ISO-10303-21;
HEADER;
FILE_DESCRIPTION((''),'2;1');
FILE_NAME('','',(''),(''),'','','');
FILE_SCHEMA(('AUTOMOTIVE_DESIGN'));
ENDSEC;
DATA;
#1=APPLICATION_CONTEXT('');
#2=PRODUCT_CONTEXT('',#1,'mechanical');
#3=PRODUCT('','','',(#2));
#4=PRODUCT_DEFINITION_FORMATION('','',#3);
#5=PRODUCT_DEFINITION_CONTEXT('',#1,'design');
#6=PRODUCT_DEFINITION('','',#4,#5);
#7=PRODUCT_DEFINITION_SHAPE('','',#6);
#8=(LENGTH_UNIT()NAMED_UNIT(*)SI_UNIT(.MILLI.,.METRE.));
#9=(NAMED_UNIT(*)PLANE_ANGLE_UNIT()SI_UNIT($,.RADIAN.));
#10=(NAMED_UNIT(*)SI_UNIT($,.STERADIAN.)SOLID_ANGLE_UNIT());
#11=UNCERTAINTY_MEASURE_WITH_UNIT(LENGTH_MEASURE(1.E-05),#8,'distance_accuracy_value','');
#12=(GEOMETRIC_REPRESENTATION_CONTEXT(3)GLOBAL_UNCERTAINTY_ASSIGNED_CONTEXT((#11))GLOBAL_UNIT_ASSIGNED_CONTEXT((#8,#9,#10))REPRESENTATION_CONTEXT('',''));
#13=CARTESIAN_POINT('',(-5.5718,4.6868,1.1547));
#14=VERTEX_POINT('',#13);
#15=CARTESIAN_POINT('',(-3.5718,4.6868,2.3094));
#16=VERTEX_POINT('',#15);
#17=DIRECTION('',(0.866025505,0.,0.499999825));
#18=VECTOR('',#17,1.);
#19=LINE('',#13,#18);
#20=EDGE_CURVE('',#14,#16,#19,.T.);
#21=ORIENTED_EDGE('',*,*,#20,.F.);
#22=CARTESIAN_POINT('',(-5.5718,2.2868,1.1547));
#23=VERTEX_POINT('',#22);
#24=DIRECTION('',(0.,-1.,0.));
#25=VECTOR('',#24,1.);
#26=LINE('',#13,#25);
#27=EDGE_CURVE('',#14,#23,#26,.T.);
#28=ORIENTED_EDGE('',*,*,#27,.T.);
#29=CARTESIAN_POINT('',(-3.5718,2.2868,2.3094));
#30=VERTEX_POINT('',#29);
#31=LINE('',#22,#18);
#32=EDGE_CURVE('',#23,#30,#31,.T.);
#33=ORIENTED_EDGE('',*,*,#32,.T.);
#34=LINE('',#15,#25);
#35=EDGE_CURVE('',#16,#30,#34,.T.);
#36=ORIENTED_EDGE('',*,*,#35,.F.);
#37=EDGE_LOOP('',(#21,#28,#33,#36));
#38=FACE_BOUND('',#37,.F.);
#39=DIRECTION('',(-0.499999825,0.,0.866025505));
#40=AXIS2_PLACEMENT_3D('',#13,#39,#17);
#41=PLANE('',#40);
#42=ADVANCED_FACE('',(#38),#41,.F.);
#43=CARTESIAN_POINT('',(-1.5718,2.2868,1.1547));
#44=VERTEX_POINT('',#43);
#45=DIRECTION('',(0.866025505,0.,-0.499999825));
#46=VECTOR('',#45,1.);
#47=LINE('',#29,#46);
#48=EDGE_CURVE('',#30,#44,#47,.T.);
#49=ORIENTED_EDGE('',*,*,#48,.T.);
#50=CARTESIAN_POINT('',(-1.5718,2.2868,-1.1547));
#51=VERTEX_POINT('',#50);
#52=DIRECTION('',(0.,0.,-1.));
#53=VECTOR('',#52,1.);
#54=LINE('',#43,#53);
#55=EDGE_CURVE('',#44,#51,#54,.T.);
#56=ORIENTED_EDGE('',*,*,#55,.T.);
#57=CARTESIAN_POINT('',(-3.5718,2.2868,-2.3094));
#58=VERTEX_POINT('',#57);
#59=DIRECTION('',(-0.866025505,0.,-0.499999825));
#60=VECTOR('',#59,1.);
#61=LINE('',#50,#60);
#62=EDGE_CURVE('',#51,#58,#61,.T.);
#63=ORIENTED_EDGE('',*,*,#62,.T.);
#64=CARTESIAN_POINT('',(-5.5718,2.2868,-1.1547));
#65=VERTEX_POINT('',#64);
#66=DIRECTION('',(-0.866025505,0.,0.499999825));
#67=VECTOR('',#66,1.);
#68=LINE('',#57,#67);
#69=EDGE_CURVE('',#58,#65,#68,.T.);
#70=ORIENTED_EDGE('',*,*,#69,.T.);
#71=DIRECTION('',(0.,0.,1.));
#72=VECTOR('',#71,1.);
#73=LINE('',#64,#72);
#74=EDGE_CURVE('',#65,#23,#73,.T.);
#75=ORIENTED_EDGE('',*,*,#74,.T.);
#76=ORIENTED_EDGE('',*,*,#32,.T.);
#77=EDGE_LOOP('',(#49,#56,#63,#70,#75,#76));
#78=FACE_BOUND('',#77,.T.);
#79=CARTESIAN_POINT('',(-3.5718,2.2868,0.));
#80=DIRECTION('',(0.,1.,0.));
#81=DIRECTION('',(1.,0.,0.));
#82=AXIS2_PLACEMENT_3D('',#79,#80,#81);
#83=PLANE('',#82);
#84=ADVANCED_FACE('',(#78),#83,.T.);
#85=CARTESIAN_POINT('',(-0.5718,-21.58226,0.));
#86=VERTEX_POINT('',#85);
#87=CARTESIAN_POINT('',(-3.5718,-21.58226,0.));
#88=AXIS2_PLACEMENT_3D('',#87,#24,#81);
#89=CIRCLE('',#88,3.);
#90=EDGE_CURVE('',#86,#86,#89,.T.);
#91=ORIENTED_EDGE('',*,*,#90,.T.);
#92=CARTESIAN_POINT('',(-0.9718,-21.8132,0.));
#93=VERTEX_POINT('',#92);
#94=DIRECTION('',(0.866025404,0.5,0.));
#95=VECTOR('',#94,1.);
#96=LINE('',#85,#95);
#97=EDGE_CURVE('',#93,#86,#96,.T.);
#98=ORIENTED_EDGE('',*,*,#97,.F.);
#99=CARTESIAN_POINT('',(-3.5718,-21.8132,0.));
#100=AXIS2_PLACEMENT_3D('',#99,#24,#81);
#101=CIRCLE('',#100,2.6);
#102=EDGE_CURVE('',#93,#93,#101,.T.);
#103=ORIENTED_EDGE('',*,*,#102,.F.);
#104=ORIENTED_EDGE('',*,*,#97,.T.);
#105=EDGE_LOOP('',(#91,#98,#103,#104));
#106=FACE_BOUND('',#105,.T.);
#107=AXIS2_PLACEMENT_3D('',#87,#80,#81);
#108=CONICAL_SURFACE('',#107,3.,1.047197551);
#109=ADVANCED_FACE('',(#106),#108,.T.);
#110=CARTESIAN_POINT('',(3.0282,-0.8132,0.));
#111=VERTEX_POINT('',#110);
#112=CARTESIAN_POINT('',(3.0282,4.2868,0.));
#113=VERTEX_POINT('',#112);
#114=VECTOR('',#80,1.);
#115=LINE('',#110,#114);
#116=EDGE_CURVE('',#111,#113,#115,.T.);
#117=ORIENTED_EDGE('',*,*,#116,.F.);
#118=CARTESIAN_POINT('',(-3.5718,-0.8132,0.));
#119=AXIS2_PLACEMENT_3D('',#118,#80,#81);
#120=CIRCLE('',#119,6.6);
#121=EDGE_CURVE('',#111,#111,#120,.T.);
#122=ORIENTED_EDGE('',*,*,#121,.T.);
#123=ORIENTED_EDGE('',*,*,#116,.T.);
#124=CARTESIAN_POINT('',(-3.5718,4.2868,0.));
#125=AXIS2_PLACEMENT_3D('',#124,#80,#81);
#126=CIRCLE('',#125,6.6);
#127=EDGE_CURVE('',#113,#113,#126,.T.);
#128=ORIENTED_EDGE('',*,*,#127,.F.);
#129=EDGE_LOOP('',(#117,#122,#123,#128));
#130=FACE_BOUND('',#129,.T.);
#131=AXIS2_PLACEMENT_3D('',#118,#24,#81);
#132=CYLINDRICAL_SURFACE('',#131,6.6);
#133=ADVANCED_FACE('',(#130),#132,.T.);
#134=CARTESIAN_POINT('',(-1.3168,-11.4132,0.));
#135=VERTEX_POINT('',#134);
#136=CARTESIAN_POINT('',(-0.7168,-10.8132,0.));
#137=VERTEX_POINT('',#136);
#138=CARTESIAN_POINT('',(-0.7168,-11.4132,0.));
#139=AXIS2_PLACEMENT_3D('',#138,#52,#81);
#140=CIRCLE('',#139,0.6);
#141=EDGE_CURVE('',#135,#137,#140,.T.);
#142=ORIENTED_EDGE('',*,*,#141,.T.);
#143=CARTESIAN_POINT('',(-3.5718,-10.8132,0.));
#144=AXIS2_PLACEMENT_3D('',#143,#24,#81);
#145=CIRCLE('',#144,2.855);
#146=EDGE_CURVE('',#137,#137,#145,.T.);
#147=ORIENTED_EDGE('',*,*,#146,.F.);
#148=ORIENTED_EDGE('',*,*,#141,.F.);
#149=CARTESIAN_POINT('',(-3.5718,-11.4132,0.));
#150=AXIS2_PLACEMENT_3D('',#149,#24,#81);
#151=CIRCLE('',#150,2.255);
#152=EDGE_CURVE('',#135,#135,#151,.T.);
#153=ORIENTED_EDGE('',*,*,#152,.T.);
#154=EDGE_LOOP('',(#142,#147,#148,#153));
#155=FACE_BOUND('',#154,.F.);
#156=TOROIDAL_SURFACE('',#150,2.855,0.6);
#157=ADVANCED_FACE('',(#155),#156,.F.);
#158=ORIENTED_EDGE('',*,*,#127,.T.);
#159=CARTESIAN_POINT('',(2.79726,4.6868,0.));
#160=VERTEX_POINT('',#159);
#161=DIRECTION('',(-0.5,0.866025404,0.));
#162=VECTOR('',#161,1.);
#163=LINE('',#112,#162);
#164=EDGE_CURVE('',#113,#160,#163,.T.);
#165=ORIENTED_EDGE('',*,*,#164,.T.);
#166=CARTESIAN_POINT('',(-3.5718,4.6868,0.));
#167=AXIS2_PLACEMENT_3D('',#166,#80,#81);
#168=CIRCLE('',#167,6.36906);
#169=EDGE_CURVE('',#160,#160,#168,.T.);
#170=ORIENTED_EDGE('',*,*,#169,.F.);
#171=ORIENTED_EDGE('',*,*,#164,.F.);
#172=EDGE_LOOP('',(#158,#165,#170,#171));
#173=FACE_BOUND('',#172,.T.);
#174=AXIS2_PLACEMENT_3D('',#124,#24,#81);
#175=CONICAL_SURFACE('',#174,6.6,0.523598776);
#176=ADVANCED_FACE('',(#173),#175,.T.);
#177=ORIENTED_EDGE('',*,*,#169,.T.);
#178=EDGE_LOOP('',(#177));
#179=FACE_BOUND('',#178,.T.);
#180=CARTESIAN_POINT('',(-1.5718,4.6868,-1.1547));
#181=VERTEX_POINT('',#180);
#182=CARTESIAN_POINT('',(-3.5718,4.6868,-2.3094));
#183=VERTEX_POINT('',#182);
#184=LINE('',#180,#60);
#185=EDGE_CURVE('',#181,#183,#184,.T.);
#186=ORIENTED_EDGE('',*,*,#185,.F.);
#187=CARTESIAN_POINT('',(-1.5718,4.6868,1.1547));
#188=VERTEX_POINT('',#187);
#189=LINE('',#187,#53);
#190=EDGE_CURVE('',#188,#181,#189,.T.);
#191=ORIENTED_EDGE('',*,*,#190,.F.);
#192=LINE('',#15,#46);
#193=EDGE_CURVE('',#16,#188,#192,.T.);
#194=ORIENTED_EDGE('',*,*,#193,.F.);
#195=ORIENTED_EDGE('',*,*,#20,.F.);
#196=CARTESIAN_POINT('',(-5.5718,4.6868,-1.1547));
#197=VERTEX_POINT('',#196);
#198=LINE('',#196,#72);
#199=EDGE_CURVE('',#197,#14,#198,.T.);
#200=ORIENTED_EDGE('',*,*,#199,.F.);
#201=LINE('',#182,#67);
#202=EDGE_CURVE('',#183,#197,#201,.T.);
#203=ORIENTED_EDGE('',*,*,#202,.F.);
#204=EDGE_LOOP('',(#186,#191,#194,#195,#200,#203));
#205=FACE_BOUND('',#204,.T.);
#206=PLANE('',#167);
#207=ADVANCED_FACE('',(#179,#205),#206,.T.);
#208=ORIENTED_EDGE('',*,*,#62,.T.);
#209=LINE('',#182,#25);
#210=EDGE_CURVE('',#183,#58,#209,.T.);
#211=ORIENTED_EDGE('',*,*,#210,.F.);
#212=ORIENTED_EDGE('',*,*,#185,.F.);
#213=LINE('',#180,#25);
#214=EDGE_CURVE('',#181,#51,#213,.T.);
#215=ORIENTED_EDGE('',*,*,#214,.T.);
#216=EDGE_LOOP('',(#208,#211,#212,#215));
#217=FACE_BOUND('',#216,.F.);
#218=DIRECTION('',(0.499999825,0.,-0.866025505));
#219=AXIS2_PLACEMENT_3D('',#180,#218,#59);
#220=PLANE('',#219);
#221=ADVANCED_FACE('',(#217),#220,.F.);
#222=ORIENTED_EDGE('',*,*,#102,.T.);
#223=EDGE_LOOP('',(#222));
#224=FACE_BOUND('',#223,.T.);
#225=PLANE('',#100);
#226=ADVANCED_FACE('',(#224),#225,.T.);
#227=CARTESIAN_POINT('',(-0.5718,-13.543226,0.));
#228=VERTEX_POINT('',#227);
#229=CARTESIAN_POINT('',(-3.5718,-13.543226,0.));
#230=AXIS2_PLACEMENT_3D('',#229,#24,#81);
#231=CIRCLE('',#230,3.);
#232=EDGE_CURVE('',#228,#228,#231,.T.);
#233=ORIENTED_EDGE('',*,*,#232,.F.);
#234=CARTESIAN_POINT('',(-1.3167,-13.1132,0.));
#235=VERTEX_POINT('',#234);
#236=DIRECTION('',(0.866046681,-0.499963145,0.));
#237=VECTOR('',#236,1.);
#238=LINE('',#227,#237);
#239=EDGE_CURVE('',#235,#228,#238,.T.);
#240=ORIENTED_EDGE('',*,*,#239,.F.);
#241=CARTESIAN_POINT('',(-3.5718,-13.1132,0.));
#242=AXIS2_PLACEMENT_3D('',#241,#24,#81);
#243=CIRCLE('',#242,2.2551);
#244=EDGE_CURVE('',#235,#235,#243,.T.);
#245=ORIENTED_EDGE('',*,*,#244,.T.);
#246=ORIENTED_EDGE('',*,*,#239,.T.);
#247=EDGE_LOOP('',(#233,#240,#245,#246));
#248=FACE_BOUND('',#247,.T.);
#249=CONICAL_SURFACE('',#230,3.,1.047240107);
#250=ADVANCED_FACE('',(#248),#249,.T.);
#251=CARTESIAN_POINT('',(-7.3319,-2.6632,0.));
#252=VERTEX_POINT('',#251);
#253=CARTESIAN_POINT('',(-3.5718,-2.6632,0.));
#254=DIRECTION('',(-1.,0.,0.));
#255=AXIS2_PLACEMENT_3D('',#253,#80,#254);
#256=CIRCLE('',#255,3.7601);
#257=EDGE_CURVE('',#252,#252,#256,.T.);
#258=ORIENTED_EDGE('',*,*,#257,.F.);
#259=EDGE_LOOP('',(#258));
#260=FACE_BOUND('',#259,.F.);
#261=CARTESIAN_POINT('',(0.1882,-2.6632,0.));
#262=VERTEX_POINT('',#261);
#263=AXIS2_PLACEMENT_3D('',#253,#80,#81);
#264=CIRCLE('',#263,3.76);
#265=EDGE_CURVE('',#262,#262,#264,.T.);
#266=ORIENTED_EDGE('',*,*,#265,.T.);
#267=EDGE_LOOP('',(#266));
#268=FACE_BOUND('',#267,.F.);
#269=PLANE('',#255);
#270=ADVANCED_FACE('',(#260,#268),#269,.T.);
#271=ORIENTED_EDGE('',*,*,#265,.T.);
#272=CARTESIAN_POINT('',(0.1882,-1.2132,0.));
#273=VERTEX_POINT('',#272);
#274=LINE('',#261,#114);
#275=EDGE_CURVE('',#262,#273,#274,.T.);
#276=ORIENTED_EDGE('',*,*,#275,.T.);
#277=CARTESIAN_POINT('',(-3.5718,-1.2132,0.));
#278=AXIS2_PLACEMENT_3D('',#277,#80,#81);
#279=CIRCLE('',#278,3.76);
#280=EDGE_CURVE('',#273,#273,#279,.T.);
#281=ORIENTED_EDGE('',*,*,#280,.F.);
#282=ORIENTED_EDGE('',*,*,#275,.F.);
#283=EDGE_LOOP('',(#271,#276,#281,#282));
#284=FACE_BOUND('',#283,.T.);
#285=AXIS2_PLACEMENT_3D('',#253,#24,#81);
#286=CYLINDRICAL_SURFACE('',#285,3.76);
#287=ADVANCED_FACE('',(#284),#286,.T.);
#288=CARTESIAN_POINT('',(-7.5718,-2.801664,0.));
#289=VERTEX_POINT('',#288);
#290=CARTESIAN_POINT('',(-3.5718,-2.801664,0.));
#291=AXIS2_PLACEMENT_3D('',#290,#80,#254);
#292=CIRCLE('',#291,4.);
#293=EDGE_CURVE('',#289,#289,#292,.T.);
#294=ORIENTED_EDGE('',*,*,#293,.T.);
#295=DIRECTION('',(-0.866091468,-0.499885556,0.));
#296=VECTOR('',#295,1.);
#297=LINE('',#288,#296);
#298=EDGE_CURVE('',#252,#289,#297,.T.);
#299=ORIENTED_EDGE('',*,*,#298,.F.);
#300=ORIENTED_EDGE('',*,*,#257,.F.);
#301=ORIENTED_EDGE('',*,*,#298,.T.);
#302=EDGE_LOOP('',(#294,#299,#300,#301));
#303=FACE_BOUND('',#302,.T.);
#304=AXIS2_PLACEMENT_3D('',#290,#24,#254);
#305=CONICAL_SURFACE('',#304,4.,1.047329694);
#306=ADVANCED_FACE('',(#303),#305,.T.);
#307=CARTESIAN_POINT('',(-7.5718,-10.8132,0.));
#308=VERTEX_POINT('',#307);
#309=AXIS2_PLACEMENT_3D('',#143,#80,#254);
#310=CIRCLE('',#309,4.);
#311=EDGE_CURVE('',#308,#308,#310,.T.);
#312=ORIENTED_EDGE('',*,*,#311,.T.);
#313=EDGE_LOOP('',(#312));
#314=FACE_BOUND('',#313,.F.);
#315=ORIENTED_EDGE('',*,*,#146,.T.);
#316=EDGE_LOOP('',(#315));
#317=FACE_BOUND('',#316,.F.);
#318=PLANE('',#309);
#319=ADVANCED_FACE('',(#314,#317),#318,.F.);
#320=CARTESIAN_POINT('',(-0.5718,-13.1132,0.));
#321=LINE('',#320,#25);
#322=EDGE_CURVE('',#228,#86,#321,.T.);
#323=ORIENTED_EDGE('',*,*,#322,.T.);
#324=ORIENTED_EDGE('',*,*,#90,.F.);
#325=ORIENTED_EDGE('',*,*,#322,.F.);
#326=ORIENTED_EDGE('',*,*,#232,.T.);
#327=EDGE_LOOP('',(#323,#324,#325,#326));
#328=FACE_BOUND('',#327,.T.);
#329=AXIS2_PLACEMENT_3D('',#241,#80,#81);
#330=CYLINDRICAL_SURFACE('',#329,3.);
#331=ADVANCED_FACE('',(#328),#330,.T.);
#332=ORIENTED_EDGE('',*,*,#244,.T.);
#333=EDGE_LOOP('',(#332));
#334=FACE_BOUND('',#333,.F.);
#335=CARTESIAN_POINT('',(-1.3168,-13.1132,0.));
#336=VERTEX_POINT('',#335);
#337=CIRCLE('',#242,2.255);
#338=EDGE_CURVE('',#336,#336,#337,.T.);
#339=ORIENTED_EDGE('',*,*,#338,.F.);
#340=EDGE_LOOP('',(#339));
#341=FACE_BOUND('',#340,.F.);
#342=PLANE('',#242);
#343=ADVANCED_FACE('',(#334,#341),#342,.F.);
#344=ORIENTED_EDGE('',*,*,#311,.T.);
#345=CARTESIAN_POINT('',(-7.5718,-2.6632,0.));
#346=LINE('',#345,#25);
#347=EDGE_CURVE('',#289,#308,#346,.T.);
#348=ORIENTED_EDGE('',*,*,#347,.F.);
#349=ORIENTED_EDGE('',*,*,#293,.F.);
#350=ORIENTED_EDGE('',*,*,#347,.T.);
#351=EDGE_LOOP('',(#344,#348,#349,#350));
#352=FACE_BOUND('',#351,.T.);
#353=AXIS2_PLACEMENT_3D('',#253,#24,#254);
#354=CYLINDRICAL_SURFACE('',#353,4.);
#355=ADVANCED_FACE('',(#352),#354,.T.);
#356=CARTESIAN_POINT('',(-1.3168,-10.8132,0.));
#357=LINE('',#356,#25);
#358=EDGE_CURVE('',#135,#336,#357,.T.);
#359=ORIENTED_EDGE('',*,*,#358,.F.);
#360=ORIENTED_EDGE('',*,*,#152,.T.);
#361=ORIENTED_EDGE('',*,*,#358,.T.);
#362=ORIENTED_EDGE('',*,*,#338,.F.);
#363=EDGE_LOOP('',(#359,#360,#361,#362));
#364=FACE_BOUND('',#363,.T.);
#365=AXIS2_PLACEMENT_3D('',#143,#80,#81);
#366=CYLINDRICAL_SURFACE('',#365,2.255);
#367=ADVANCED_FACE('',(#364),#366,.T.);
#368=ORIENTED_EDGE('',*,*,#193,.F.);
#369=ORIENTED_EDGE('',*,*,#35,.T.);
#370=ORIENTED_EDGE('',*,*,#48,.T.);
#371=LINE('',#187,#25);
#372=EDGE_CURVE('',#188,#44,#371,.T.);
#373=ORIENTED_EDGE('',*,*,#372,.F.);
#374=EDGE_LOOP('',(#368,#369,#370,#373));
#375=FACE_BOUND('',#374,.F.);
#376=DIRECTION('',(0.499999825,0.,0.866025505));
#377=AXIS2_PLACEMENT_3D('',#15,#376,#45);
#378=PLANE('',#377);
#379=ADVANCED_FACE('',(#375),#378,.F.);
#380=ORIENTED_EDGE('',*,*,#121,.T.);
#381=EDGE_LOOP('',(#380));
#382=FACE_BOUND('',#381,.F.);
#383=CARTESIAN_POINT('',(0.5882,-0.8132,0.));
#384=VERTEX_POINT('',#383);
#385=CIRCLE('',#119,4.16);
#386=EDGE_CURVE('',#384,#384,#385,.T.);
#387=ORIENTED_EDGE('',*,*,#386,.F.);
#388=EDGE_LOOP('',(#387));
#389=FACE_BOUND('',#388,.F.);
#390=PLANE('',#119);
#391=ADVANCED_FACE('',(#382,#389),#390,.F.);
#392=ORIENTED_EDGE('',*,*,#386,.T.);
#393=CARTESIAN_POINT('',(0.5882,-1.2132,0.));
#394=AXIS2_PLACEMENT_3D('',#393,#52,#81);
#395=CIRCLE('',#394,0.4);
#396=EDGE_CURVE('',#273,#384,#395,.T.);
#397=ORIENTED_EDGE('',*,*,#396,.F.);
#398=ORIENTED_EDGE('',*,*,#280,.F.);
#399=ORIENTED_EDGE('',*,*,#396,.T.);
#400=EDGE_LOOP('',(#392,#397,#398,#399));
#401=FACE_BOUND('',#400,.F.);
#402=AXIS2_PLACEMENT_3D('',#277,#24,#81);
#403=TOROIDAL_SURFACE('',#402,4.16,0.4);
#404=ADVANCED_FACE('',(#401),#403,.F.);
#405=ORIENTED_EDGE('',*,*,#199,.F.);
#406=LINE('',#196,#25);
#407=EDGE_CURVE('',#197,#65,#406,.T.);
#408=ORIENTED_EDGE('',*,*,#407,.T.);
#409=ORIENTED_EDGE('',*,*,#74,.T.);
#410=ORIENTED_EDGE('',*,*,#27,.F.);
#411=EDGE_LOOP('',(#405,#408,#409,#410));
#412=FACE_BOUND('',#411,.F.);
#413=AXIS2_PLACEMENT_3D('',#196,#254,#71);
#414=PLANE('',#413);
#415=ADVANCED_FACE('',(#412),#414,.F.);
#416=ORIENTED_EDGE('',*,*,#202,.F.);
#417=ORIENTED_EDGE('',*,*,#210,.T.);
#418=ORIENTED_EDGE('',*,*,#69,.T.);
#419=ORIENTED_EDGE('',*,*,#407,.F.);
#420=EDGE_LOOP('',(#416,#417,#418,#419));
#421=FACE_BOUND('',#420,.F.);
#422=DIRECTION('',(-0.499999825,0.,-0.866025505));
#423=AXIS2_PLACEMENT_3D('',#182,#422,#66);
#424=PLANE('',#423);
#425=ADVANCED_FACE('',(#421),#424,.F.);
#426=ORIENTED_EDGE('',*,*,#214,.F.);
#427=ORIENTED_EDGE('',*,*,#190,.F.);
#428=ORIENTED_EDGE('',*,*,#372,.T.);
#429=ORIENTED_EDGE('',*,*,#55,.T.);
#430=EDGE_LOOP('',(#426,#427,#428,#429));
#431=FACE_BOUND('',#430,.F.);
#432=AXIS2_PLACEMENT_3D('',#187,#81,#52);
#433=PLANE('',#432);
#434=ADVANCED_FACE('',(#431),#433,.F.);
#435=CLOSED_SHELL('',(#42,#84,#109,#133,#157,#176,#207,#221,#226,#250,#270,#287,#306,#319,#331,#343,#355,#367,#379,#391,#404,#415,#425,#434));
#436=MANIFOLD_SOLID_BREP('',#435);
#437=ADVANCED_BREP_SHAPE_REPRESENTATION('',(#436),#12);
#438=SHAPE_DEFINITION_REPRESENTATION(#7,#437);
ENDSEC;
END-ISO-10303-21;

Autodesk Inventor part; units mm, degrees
ref_plane "YZ Plane" through (0, 0, 0) normal (1, 0, 0) x (0, 1, 0)
ref_plane "XZ Plane" through (0, 0, 0) normal (0, 1, 0) x (-1, 0, 0)
ref_plane "XY Plane" through (0, 0, 0) normal (0, 0, 1) x (1, 0, 0)
sketch "Sketch1" plane through (0, 0, 0) normal (0, 0, 1) x (1, 0, 0)
  line L0 (-3.5718, -2.6632) -> (-7.5718, -2.6632)
  line L1 (-7.5718, -2.6632) -> (-7.5718, -10.8132)
  line L2 (-7.5718, -10.8132) -> (-3.5718, -10.8132)
  line L3 (-3.5718, -10.8132) -> (-3.5718, -2.6632)
  dimension "d1" = 8.15
  dimension "d2" = 4
revolve "Shoulder" add sketch "Sketch1" angle 360 about axis through (-3.5718, -10.8132, 0) along (0, 1, 0)
sketch "Sketch2" plane through (-3.5718, -2.6632, 0) normal (0, 1, 0) x (1, 0, 0)
  circle A0 centre (0, 0) radius 4 projected
  circle A1 centre (0, 0) radius 3.76
  dimension "d3" = 7.52
extrude "Shoulder_neck" add sketch "Sketch2" along normal blind 1.85 contours A1
sketch "Sketch3" plane through (-3.5718, -0.8132, 0) normal (0, 1, 0) x (1, 0, 0)
  circle A0 centre (0, 0) radius 3.76 projected
  circle A1 centre (0, 0) radius 6.6
  dimension "d6" = 13.2
extrude "Head" add sketch "Sketch3" along normal blind 5.5 contours A0 | A1
sketch "Sketch4" plane through (-3.5718, -10.8132, 0) normal (0, -1, 0) x (1, 0, 0)
  circle A0 centre (0, 0) radius 4 projected
  circle A1 centre (0, 0) radius 2.255
  dimension "d9" = 4.51
extrude "Thread_neck" add sketch "Sketch4" along normal blind 2.3 contours A1
sketch "Sketch5" plane through (-3.5718, -13.1132, 0) normal (0, -1, 0) x (1, 0, 0)
  circle A0 centre (0, 0) radius 2.255 projected
  circle A1 centre (0, 0) radius 3
  dimension "d12" = 6
extrude "Thread_shoulder" add sketch "Sketch5" along normal blind 8.7 contours A0 | A1
sketch "Sketch6" plane through (-3.5718, 4.6868, 0) normal (0, 1, 0) x (1, 0, 0)
  circle A0 centre (0, 0) radius 6.6 projected
  circle A1 centre (0, 0) radius 2 construction
  line L0 (-2, 1.1547) -> (-2, -1.1547)
  line L1 (-2, -1.1547) -> (0, -2.3094)
  line L2 (0, -2.3094) -> (2, -1.1547)
  line L3 (2, -1.1547) -> (2, 1.1547)
  line L4 (2, 1.1547) -> (0, 2.3094)
  line L5 (0, 2.3094) -> (-2, 1.1547)
  dimension "d15" = 4
extrude "Hex" cut sketch "Sketch6" against normal blind 2.4 contours L5 L4 L3 L2 L1 L0
chamfer "Chamfer1" distance 0.24 angle 30 1 edges at (0.4282, -2.6632, 0) measured on face at (-7.4166, -2.6632, -0.619)
fillet "Fillet1" radius 0.4 1 edges at (-7.3318, -0.8132, 0)
chamfer "Chamfer2" distance 0.4 angle 30 1 edges at (-10.1718, 4.6868, 0) measured on face at (2.9427, 2.8535, 1.0587)
chamfer "Chamfer3" distance 0.4 angle 30 1 edges at (-6.5718, -21.8132, 0) measured on face at (-2.6428, -21.8132, 0.823)
fillet "Fillet2" radius 0.6 1 edges at (-5.8268, -10.8132, 0)
chamfer "Chamfer7" distance 0.745 angle 30 1 edges at (-6.5718, -13.1132, 0) measured on face at (-0.871, -13.1132, -0.4192)
thread "Thread" size "M6x1" class "6g" standard "ANSI Metric M Profile" full length
equation "\"d3\" = Shoulder_neck_dia"
equation "\"d4\" = Shoulder_neck_length"
equation "\"d6\" = Head_diameter"
equation "\"d7\" = Head_height"
equation "\"d9\" = Thread_neck_dia"
equation "\"d10\" = Thread_neck_length"
equation "\"d12\" = Thread_diameter"
equation "\"d13\" = Thread_length - Thread_neck_length"
equation "\"d15\" = Hex_size"
equation "\"d16\" = Hex_length"
equation "\"d18\" = -0.5 * Shoulder_neck_dia + 0.5 * Shoulder_diameter"
equation "\"d64\" = -0.5 * Shoulder_neck_dia + 0.5 * Shoulder_diameter"
equation "\"d21\" = 0.1 * Hex_size"
equation "\"d65\" = 0.1 * Hex_size"
equation "\"d23\" = 0.5 * Thread_pitch"
equation "\"d66\" = 0.5 * Thread_pitch"
equation "\"d25\" = Thread_neck_radius"
equation "\"d60\" = -0.5 * Thread_neck_dia + 0.5 * Thread_diameter"
equation "\"d67\" = -0.5 * Thread_neck_dia + 0.5 * Thread_diameter"
equation "\"d1\" = Shoulder_length - Shoulder_neck_length"
equation "\"d2\" = 0.5 * Shoulder_diameter"
equation "\"Shoulder_diameter\" = 8"
equation "\"Shoulder_length\" = 10"
equation "\"Shoulder_neck_dia\" = 7.52"
equation "\"Thread_diameter\" = 6"
equation "\"Thread_length\" = 11"
equation "\"Head_diameter\" = 13.2"
equation "\"Head_height\" = 5.5"
equation "\"Thread_neck_dia\" = 4.51"
equation "\"Hex_size\" = 4"
equation "\"Hex_length\" = 2.4"
equation "\"Thread_pitch\" = 0.8"
equation "\"Shoulder_neck_length\" = 1.85"
equation "\"Thread_neck_length\" = 2.3"
equation "\"Thread_neck_radius\" = 0.6"
properties part number "SCREW, SHOULDER, P, 12.9, 8MMX10MM" material "Steel, High Strength Low Alloy"
